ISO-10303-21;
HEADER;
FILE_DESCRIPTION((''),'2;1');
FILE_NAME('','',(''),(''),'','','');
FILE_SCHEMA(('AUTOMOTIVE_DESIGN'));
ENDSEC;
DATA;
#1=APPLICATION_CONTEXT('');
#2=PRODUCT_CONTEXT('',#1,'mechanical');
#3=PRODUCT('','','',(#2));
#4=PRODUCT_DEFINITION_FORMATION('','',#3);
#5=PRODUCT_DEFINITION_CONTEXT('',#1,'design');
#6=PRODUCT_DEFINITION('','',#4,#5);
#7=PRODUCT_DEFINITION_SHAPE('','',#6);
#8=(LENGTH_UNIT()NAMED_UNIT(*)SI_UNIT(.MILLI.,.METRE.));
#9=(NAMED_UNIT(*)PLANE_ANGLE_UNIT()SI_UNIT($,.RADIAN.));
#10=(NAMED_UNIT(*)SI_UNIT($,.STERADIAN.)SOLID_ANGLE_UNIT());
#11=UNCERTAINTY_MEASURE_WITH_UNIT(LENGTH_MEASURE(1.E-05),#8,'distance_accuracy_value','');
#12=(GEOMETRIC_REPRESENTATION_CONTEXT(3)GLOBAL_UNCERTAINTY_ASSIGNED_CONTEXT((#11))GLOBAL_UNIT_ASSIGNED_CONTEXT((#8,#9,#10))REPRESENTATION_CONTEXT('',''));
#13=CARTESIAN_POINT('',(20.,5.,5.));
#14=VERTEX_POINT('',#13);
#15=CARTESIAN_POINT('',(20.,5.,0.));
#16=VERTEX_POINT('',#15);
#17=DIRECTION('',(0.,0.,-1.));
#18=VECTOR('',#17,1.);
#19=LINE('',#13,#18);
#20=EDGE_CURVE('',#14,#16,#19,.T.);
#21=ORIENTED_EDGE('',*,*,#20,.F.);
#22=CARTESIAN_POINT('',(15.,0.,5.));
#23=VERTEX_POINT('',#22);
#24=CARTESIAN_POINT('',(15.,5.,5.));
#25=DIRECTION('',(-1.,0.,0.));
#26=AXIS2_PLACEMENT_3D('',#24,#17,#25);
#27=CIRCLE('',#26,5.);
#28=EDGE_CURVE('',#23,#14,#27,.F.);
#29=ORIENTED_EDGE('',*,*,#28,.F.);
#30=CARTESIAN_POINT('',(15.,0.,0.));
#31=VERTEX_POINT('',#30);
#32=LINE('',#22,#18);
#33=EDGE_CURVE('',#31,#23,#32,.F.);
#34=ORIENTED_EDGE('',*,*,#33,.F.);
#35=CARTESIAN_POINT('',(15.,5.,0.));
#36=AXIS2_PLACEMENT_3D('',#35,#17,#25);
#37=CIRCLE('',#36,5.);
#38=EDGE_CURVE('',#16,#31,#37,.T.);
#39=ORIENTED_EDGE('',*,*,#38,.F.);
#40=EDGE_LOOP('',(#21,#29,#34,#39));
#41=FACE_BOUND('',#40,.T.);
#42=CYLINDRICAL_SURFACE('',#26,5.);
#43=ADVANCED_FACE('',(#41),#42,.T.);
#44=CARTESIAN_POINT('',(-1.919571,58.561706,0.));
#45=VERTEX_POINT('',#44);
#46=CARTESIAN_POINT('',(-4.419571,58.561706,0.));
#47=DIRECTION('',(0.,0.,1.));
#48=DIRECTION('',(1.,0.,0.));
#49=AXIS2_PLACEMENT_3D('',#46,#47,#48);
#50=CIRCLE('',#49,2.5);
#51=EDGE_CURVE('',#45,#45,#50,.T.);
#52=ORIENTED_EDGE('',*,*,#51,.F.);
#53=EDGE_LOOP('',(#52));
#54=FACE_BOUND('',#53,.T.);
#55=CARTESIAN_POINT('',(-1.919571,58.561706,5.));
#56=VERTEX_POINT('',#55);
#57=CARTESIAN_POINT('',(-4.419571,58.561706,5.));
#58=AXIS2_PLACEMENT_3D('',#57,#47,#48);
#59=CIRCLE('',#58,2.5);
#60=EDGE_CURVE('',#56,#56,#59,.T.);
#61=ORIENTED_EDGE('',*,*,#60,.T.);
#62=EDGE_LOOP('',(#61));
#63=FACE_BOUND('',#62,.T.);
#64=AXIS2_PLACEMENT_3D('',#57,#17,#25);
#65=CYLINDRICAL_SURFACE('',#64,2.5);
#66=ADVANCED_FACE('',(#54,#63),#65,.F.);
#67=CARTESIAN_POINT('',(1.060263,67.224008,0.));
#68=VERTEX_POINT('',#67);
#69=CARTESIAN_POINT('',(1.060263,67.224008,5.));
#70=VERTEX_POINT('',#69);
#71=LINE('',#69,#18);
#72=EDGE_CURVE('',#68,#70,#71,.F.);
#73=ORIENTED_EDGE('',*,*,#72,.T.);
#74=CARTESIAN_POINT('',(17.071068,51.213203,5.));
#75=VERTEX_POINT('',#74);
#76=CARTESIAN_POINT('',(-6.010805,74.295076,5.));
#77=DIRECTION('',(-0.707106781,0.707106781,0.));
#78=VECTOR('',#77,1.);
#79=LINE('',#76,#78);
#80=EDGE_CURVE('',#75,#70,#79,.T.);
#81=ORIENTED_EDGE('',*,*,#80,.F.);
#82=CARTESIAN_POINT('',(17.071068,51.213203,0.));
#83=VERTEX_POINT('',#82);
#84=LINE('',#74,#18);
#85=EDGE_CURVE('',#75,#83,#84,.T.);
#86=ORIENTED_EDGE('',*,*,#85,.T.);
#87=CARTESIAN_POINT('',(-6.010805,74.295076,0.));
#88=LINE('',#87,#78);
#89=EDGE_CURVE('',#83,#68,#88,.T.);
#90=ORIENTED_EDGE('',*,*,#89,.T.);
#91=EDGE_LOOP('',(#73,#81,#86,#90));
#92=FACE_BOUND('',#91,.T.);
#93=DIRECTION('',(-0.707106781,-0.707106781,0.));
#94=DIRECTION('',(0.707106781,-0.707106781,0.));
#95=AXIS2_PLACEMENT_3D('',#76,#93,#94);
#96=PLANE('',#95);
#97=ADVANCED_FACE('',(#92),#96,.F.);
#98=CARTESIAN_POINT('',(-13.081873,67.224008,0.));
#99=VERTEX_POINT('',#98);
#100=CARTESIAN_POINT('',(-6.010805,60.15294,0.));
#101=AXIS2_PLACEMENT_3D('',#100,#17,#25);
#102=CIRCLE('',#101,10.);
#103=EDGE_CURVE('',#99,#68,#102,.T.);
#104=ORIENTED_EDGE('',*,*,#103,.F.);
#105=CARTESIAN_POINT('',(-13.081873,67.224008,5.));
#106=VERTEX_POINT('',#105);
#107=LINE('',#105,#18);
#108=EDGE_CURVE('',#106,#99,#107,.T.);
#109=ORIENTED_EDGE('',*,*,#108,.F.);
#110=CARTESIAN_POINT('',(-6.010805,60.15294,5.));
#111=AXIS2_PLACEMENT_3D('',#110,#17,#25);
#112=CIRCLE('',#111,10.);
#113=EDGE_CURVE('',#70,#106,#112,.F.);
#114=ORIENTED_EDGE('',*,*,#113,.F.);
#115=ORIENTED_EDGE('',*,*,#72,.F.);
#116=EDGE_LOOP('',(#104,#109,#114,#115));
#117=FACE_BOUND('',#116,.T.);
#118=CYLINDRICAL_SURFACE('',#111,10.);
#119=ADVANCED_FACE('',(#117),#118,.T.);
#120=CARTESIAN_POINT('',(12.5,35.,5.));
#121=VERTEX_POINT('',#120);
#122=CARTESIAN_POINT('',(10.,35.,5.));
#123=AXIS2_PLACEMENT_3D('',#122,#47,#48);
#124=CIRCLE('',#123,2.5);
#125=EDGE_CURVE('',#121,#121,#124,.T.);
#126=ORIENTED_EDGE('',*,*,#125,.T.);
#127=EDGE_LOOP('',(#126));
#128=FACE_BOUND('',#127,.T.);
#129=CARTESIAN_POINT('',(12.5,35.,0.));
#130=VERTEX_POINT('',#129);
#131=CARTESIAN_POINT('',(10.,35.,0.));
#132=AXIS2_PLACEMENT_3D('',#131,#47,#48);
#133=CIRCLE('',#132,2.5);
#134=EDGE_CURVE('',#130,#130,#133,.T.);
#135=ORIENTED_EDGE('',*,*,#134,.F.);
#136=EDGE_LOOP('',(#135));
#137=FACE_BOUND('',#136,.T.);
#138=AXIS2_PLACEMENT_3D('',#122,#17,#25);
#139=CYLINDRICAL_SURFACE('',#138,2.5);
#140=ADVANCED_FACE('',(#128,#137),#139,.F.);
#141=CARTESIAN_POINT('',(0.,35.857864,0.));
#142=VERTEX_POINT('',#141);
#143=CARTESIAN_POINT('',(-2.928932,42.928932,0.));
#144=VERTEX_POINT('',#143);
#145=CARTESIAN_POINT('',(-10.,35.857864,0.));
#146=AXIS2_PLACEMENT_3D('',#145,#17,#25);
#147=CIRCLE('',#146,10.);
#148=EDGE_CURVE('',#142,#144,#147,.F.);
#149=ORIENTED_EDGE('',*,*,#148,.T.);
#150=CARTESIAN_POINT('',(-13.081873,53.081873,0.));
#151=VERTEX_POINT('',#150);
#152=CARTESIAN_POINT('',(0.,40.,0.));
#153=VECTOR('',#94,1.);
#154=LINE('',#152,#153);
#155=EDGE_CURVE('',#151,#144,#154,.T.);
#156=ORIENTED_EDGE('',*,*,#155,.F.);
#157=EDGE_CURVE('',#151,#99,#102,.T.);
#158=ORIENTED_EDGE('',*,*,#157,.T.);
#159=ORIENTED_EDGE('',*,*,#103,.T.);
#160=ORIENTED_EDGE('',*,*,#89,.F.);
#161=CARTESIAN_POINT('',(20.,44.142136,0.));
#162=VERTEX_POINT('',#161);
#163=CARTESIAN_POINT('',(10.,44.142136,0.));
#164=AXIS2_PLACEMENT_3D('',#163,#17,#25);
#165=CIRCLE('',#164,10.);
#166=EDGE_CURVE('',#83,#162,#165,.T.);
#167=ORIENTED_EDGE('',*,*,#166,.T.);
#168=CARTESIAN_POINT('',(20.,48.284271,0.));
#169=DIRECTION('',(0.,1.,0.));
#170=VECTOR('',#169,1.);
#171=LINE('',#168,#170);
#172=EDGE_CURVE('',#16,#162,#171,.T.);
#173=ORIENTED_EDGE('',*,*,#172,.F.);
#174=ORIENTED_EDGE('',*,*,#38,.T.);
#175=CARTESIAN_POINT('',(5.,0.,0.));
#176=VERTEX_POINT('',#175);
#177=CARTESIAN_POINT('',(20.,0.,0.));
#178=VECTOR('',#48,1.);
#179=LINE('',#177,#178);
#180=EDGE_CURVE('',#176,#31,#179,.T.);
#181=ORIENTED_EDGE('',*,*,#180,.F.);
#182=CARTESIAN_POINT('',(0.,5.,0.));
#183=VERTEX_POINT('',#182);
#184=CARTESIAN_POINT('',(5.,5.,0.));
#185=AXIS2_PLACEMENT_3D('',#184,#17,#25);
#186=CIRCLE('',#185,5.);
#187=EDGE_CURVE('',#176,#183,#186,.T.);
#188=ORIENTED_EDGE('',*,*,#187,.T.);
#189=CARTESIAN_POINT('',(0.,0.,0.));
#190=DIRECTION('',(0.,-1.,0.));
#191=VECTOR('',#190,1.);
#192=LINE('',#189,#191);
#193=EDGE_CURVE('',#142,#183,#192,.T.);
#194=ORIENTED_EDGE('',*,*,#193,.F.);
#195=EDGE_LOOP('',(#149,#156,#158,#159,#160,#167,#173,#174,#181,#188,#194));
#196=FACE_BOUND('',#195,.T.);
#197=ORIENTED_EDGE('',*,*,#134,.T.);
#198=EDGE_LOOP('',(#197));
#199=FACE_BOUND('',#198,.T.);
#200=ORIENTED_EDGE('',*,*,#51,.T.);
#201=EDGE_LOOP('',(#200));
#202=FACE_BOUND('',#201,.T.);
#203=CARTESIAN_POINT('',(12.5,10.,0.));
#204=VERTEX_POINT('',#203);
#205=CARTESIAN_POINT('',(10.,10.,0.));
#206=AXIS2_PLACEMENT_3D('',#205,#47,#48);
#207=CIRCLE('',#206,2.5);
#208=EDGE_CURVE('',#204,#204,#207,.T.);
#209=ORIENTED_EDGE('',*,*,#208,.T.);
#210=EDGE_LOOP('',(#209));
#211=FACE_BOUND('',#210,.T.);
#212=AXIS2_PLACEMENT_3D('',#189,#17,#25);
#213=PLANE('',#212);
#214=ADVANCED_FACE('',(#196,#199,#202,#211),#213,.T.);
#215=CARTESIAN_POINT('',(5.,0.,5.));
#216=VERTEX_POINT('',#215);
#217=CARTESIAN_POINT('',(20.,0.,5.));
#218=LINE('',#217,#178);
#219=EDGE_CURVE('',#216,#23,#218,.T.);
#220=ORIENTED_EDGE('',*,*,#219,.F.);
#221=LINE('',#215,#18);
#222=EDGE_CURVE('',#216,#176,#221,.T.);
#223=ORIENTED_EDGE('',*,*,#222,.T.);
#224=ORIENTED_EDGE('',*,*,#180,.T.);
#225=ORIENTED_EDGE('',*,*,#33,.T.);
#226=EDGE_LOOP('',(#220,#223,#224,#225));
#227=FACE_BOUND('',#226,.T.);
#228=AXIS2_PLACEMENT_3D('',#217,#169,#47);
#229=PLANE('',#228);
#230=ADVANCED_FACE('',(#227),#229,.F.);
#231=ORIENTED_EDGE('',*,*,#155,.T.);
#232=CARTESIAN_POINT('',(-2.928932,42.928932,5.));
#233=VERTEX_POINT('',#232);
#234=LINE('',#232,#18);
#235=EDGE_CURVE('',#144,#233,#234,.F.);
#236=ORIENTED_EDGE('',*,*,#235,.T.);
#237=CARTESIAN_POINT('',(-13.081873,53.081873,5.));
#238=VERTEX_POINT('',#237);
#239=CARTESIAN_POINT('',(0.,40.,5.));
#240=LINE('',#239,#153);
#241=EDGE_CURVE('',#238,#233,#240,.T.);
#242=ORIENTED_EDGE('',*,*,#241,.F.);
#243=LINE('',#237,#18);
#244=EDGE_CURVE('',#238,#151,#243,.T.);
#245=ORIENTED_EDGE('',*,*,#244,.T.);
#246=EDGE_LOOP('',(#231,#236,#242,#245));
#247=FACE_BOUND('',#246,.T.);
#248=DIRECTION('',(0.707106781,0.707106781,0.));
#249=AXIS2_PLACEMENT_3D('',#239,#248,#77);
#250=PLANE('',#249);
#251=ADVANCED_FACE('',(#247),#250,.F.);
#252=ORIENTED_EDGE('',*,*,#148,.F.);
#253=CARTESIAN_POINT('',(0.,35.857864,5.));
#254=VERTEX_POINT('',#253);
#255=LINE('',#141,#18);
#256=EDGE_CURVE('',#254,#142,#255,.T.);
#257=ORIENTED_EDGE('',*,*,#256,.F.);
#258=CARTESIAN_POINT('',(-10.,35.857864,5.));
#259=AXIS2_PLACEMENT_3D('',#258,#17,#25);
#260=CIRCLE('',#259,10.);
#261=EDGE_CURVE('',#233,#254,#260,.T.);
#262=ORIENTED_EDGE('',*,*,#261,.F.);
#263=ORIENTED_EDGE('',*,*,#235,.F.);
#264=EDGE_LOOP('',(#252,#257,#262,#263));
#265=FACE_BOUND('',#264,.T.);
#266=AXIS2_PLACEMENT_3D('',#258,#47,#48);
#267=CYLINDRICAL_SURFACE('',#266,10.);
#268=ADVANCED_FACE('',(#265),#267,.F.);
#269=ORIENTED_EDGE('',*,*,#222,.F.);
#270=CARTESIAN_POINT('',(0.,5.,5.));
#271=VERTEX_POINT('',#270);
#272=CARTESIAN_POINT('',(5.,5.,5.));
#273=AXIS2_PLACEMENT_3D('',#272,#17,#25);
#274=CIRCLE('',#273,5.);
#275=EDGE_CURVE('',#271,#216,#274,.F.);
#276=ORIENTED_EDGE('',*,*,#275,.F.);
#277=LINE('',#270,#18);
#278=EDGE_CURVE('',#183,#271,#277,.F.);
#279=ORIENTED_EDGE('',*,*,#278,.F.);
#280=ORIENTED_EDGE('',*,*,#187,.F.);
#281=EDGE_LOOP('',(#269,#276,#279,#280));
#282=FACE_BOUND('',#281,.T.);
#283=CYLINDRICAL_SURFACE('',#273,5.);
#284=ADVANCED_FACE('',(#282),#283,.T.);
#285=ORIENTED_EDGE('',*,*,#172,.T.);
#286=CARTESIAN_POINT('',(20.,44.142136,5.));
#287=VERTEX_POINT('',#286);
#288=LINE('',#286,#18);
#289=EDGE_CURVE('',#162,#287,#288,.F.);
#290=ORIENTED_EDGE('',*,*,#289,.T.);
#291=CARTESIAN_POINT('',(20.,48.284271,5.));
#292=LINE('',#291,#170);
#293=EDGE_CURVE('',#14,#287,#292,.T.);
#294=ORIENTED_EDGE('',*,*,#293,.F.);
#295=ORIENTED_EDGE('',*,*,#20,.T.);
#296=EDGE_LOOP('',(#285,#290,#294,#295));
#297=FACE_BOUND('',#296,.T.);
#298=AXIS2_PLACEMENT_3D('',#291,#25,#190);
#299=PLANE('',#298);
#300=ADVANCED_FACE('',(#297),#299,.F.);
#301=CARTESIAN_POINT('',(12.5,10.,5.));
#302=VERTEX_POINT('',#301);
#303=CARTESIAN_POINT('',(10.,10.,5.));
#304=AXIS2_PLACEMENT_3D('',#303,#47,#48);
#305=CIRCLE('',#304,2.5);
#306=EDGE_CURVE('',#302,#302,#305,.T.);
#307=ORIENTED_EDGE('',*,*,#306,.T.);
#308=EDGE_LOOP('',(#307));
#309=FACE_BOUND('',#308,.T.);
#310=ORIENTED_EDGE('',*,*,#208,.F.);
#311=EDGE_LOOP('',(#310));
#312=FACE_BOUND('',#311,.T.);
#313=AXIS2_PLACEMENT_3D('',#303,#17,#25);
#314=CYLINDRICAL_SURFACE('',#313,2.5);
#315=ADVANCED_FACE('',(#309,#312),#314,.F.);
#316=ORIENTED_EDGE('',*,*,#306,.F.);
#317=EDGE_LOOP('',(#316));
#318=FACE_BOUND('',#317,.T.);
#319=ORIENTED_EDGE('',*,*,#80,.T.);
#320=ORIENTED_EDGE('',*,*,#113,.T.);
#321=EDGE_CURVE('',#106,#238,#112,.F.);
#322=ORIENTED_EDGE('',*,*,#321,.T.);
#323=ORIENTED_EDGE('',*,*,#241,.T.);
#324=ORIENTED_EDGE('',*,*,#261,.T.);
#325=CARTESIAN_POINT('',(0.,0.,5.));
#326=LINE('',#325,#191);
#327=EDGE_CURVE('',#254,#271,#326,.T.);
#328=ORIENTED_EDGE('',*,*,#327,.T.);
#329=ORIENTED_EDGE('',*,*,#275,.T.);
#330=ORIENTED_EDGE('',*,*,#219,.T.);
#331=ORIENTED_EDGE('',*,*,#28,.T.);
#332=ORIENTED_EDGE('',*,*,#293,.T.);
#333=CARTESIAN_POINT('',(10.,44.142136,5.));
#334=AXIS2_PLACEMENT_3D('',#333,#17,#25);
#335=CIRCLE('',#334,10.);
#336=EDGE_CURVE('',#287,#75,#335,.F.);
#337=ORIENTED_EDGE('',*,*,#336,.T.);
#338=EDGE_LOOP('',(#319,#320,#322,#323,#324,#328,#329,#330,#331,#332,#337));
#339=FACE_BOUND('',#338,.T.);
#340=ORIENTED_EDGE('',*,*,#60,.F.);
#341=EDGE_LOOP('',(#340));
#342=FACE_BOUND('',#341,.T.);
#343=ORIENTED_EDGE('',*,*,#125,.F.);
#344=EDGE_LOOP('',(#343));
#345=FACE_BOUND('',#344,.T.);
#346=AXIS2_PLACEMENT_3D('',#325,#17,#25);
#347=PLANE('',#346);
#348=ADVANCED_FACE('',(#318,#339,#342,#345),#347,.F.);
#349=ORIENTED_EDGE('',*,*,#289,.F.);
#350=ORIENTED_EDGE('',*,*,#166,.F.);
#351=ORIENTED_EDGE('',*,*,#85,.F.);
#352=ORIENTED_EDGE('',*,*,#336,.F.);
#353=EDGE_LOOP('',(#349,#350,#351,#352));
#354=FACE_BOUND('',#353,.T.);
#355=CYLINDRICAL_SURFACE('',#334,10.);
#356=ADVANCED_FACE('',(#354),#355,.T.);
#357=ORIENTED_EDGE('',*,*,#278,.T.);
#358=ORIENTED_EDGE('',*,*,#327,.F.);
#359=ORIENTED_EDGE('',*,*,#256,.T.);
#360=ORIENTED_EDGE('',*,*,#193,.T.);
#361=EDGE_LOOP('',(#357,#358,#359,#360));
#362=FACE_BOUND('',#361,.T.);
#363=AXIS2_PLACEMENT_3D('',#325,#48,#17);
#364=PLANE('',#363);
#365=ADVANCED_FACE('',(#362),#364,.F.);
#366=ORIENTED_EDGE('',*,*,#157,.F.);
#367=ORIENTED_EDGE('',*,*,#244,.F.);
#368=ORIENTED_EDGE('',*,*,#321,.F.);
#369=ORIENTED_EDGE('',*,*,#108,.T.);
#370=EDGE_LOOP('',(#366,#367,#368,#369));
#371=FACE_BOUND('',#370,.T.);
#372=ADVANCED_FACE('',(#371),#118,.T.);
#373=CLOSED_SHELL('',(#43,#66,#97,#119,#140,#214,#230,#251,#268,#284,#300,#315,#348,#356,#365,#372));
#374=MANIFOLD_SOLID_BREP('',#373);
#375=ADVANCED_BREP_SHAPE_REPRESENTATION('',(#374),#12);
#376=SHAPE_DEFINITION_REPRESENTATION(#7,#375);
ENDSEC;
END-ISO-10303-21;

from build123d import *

# Parameters (mm, degrees)
SKETCH1_R           = 2.5
BOSS_EXTRUDE1_DEPTH = 5
FILLET1_R           = 10
FILLET2_R           = 5


with BuildPart() as part:
    # Sketch1 → Boss-Extrude1 (new body)
    with BuildSketch(Plane.XY):
        Polygon((0, 0), (0, 40), (-20.152940401, 60.152940401), (-6.010804777, 74.295076025), (20, 48.284271247), (20, 0), align=None)
        with Locations((10, 10)):
            Circle(SKETCH1_R, mode=Mode.SUBTRACT)
        with Locations((10, 35)):
            Circle(SKETCH1_R, mode=Mode.SUBTRACT)
        with Locations((-4.419570665, 58.561706289)):
            Circle(SKETCH1_R, mode=Mode.SUBTRACT)
    extrude(amount=BOSS_EXTRUDE1_DEPTH)

    # Fillet1
    fillet1_edges = [part.edges().sort_by_distance(p)[0] for p in [
        (20, 48.284271247, 2.5),
        (0, 40, 2.5),
        (-20.152940401, 60.152940401, 2.5),
        (-6.010804777, 74.295076025, 2.5),
    ]]
    fillet(fillet1_edges, radius=FILLET1_R - 0.0001)  # a hair under: the kernel refuses the full size

    # Fillet2
    fillet2_edges = [part.edges().sort_by_distance(p)[0] for p in [
        (0, 0, 2.5),
        (20, 0, 2.5),
    ]]
    fillet(fillet2_edges, radius=FILLET2_R)


solid = part.part
